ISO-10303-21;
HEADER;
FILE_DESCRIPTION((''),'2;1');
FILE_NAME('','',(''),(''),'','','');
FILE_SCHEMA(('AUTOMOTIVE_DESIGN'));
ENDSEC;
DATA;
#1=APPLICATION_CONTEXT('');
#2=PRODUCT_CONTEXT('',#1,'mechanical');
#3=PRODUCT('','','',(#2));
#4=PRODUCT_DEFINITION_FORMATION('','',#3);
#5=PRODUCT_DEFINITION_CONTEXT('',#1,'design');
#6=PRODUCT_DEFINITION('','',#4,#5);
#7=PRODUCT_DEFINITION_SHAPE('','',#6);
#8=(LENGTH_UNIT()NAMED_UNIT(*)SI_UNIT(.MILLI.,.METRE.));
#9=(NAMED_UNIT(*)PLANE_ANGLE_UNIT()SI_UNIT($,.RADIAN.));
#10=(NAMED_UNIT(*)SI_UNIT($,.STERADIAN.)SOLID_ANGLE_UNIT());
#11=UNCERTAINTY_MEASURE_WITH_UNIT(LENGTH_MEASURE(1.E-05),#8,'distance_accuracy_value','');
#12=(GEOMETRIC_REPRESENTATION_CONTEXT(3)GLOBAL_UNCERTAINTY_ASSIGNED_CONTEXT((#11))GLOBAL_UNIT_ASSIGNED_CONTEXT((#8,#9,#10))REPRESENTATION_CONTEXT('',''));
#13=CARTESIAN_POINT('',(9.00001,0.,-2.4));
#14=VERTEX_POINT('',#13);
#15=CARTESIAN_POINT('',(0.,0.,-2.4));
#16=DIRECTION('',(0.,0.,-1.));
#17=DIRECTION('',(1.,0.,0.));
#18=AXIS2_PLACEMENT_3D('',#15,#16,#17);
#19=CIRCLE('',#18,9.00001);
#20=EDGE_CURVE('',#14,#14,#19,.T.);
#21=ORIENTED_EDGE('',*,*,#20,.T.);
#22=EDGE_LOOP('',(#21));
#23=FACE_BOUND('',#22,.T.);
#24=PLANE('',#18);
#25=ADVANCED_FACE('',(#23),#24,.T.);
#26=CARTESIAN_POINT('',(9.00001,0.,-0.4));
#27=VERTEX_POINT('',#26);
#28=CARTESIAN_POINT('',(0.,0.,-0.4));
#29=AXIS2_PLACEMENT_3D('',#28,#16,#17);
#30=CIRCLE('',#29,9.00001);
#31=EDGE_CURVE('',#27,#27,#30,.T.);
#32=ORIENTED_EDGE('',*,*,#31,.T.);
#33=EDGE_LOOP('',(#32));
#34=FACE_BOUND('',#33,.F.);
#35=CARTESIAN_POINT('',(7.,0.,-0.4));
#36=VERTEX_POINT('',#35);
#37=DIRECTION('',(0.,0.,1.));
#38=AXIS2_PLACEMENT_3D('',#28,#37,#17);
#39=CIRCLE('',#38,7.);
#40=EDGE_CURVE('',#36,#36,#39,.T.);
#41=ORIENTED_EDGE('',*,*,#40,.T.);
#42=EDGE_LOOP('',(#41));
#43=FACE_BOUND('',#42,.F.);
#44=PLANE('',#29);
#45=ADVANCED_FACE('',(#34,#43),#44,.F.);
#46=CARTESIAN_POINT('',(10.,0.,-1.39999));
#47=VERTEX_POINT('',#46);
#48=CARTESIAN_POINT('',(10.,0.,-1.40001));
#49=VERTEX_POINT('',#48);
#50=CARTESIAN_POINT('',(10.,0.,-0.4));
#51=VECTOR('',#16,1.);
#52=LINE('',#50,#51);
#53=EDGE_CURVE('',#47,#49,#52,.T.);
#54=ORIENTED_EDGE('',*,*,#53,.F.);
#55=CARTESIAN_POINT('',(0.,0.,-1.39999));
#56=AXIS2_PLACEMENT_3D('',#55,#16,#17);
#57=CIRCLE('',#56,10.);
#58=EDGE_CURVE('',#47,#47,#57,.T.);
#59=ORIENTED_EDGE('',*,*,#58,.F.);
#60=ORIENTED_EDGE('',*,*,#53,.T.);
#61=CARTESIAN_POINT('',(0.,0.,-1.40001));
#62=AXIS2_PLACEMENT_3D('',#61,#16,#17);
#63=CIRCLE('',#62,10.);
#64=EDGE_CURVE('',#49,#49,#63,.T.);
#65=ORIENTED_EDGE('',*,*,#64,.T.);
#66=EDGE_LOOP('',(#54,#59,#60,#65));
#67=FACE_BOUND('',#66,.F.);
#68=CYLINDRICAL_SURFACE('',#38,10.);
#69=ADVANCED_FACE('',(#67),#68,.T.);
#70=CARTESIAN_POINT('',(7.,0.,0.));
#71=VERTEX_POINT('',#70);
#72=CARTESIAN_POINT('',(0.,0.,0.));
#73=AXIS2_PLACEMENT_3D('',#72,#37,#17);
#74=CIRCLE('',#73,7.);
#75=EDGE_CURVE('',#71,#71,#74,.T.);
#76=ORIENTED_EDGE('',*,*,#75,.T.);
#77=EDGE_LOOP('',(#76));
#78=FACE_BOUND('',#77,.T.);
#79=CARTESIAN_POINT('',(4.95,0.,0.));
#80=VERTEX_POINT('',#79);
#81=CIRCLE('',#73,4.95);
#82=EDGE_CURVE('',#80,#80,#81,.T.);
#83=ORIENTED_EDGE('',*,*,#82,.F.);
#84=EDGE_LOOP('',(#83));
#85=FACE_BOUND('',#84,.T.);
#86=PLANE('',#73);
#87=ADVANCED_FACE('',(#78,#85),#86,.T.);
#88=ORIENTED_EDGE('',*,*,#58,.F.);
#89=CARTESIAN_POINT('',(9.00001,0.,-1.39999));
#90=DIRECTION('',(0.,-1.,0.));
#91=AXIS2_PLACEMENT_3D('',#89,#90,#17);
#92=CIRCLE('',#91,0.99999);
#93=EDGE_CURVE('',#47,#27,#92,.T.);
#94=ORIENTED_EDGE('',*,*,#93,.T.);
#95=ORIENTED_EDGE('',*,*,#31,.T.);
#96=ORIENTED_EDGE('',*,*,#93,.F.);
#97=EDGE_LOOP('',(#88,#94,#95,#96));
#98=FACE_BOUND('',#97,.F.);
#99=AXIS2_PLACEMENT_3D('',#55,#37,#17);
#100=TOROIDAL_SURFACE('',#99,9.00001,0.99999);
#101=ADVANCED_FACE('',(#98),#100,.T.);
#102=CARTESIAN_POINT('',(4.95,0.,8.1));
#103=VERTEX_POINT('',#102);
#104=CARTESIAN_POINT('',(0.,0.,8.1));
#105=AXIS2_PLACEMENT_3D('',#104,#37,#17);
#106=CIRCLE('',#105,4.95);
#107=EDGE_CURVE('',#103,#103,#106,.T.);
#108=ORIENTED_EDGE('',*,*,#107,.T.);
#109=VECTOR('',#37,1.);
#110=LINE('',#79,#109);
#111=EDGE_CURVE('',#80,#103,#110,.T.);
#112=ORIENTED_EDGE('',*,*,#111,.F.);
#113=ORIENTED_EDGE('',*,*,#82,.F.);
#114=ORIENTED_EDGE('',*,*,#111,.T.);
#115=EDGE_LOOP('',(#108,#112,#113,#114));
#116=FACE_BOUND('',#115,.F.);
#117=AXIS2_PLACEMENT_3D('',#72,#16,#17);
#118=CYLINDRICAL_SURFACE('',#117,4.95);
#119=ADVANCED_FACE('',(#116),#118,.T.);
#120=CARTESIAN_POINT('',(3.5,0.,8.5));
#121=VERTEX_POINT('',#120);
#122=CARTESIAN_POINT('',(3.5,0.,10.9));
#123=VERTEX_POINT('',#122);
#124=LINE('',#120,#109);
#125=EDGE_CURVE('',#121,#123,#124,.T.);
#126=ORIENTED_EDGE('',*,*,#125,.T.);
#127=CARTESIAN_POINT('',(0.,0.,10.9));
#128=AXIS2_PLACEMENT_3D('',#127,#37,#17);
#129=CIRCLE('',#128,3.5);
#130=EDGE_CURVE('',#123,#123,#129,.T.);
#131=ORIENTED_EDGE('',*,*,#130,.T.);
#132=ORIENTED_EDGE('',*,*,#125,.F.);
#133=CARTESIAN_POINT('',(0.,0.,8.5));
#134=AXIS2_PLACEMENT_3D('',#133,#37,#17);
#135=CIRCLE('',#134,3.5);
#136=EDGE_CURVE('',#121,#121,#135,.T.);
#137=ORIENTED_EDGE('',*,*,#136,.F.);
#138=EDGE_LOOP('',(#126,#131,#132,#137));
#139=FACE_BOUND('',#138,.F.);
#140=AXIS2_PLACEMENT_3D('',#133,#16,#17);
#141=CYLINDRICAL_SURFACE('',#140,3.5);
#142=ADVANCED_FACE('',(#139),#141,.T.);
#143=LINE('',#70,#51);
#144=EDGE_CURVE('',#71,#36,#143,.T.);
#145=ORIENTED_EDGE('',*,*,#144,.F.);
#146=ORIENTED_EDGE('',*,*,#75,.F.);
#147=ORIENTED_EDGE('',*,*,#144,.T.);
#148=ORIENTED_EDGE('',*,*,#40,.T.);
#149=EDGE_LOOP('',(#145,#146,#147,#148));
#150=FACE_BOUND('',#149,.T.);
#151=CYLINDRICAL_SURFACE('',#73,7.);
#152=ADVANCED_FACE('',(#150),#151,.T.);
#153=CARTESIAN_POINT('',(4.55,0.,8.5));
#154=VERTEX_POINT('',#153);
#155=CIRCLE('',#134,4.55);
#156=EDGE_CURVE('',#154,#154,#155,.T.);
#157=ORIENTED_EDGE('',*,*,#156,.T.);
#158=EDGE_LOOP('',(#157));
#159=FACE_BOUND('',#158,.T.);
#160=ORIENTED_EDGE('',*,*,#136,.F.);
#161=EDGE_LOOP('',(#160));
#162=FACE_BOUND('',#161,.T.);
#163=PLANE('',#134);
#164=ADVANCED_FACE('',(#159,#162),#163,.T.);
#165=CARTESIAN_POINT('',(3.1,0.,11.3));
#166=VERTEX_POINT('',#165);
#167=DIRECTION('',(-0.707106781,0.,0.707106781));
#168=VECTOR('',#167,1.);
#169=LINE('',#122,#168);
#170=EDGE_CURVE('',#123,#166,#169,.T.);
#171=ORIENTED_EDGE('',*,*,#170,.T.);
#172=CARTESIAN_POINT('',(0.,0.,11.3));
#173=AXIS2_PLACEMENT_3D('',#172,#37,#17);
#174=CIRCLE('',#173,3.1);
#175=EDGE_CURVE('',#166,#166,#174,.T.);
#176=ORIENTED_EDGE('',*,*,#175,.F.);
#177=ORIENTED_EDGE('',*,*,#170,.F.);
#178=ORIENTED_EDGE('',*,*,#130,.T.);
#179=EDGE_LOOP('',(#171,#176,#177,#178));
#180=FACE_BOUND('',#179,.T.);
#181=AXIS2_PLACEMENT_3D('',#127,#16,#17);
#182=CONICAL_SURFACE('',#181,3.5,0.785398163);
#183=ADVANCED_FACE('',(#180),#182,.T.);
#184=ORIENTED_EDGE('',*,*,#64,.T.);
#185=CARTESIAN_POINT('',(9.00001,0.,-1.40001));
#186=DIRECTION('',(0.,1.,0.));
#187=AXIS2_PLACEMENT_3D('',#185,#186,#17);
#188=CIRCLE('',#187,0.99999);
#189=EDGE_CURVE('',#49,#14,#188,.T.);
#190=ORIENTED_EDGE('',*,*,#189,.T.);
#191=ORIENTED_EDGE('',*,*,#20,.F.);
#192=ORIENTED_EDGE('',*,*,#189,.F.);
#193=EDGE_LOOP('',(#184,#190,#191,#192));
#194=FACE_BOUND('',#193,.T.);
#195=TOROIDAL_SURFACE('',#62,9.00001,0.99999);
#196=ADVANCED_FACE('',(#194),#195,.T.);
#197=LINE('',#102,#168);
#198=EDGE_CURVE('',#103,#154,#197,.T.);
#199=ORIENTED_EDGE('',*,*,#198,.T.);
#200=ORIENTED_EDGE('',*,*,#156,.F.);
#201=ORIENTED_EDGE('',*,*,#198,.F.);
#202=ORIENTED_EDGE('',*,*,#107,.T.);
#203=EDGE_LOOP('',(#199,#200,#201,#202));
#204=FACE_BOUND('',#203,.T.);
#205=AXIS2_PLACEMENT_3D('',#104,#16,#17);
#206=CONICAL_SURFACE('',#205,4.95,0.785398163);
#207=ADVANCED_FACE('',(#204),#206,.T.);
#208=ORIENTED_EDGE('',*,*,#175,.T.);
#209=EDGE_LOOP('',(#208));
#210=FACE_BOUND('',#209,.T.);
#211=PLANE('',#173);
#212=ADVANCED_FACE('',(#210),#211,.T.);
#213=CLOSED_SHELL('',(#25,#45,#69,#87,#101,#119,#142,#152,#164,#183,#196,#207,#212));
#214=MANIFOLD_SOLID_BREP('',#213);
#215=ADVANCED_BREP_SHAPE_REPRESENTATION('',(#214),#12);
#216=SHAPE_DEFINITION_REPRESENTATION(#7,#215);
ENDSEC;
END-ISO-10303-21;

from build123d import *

# Parameters (mm, degrees)
F0_R     = 4.95
F1_DEPTH = 8.5
F2_R     = 7
F3_DEPTH = 0.4
F4_R     = 10
F5_DEPTH = 2
F6_R     = 0.99999
F7_R     = 3.5
F8_DEPTH = 2.8
F9_SIZE  = 0.4


# Not quite as in the source:
# - a fillet or chamfer is up to 0.001 mm smaller than in the source, because OpenCascade refuses the exact size


with BuildPart() as f1:
    # F0 (on Top) → F1 (new body)
    with BuildSketch(Plane.XY):
        Circle(F0_R)
    extrude(amount=F1_DEPTH)

    # F2 (on Top) → F3 (join)
    with BuildSketch(Plane.XY):
        Circle(F2_R)
    extrude(amount=-F3_DEPTH)

    # F4 (on face) → F5 (join)
    with BuildSketch(Plane(origin=(0, 0, -0.4), x_dir=(1, 0, 0), z_dir=(0, 0, -1))):
        Circle(F4_R)
    extrude(amount=F5_DEPTH)

    # F6 (radius 1 in the source; OpenCascade refuses exactly that, so slightly less here)
    f6_edges = [f1.edges().sort_by_distance(p)[0] for p in [
        (-10, 0, -2.4),
        (-10, 0, -0.4),
    ]]
    fillet(f6_edges, radius=F6_R)

    # F7 (on face) → F8 (join)
    with BuildSketch(Plane.XY.offset(8.5)):
        Circle(F7_R)
    extrude(amount=F8_DEPTH)

    # F9
    f9_edges = [f1.edges().sort_by_distance(p)[0] for p in [
        (-3.5, 0, 11.3),
        (-4.95, 0, 8.5),
    ]]
    chamfer(f9_edges, length=F9_SIZE)


solid = f1.part
